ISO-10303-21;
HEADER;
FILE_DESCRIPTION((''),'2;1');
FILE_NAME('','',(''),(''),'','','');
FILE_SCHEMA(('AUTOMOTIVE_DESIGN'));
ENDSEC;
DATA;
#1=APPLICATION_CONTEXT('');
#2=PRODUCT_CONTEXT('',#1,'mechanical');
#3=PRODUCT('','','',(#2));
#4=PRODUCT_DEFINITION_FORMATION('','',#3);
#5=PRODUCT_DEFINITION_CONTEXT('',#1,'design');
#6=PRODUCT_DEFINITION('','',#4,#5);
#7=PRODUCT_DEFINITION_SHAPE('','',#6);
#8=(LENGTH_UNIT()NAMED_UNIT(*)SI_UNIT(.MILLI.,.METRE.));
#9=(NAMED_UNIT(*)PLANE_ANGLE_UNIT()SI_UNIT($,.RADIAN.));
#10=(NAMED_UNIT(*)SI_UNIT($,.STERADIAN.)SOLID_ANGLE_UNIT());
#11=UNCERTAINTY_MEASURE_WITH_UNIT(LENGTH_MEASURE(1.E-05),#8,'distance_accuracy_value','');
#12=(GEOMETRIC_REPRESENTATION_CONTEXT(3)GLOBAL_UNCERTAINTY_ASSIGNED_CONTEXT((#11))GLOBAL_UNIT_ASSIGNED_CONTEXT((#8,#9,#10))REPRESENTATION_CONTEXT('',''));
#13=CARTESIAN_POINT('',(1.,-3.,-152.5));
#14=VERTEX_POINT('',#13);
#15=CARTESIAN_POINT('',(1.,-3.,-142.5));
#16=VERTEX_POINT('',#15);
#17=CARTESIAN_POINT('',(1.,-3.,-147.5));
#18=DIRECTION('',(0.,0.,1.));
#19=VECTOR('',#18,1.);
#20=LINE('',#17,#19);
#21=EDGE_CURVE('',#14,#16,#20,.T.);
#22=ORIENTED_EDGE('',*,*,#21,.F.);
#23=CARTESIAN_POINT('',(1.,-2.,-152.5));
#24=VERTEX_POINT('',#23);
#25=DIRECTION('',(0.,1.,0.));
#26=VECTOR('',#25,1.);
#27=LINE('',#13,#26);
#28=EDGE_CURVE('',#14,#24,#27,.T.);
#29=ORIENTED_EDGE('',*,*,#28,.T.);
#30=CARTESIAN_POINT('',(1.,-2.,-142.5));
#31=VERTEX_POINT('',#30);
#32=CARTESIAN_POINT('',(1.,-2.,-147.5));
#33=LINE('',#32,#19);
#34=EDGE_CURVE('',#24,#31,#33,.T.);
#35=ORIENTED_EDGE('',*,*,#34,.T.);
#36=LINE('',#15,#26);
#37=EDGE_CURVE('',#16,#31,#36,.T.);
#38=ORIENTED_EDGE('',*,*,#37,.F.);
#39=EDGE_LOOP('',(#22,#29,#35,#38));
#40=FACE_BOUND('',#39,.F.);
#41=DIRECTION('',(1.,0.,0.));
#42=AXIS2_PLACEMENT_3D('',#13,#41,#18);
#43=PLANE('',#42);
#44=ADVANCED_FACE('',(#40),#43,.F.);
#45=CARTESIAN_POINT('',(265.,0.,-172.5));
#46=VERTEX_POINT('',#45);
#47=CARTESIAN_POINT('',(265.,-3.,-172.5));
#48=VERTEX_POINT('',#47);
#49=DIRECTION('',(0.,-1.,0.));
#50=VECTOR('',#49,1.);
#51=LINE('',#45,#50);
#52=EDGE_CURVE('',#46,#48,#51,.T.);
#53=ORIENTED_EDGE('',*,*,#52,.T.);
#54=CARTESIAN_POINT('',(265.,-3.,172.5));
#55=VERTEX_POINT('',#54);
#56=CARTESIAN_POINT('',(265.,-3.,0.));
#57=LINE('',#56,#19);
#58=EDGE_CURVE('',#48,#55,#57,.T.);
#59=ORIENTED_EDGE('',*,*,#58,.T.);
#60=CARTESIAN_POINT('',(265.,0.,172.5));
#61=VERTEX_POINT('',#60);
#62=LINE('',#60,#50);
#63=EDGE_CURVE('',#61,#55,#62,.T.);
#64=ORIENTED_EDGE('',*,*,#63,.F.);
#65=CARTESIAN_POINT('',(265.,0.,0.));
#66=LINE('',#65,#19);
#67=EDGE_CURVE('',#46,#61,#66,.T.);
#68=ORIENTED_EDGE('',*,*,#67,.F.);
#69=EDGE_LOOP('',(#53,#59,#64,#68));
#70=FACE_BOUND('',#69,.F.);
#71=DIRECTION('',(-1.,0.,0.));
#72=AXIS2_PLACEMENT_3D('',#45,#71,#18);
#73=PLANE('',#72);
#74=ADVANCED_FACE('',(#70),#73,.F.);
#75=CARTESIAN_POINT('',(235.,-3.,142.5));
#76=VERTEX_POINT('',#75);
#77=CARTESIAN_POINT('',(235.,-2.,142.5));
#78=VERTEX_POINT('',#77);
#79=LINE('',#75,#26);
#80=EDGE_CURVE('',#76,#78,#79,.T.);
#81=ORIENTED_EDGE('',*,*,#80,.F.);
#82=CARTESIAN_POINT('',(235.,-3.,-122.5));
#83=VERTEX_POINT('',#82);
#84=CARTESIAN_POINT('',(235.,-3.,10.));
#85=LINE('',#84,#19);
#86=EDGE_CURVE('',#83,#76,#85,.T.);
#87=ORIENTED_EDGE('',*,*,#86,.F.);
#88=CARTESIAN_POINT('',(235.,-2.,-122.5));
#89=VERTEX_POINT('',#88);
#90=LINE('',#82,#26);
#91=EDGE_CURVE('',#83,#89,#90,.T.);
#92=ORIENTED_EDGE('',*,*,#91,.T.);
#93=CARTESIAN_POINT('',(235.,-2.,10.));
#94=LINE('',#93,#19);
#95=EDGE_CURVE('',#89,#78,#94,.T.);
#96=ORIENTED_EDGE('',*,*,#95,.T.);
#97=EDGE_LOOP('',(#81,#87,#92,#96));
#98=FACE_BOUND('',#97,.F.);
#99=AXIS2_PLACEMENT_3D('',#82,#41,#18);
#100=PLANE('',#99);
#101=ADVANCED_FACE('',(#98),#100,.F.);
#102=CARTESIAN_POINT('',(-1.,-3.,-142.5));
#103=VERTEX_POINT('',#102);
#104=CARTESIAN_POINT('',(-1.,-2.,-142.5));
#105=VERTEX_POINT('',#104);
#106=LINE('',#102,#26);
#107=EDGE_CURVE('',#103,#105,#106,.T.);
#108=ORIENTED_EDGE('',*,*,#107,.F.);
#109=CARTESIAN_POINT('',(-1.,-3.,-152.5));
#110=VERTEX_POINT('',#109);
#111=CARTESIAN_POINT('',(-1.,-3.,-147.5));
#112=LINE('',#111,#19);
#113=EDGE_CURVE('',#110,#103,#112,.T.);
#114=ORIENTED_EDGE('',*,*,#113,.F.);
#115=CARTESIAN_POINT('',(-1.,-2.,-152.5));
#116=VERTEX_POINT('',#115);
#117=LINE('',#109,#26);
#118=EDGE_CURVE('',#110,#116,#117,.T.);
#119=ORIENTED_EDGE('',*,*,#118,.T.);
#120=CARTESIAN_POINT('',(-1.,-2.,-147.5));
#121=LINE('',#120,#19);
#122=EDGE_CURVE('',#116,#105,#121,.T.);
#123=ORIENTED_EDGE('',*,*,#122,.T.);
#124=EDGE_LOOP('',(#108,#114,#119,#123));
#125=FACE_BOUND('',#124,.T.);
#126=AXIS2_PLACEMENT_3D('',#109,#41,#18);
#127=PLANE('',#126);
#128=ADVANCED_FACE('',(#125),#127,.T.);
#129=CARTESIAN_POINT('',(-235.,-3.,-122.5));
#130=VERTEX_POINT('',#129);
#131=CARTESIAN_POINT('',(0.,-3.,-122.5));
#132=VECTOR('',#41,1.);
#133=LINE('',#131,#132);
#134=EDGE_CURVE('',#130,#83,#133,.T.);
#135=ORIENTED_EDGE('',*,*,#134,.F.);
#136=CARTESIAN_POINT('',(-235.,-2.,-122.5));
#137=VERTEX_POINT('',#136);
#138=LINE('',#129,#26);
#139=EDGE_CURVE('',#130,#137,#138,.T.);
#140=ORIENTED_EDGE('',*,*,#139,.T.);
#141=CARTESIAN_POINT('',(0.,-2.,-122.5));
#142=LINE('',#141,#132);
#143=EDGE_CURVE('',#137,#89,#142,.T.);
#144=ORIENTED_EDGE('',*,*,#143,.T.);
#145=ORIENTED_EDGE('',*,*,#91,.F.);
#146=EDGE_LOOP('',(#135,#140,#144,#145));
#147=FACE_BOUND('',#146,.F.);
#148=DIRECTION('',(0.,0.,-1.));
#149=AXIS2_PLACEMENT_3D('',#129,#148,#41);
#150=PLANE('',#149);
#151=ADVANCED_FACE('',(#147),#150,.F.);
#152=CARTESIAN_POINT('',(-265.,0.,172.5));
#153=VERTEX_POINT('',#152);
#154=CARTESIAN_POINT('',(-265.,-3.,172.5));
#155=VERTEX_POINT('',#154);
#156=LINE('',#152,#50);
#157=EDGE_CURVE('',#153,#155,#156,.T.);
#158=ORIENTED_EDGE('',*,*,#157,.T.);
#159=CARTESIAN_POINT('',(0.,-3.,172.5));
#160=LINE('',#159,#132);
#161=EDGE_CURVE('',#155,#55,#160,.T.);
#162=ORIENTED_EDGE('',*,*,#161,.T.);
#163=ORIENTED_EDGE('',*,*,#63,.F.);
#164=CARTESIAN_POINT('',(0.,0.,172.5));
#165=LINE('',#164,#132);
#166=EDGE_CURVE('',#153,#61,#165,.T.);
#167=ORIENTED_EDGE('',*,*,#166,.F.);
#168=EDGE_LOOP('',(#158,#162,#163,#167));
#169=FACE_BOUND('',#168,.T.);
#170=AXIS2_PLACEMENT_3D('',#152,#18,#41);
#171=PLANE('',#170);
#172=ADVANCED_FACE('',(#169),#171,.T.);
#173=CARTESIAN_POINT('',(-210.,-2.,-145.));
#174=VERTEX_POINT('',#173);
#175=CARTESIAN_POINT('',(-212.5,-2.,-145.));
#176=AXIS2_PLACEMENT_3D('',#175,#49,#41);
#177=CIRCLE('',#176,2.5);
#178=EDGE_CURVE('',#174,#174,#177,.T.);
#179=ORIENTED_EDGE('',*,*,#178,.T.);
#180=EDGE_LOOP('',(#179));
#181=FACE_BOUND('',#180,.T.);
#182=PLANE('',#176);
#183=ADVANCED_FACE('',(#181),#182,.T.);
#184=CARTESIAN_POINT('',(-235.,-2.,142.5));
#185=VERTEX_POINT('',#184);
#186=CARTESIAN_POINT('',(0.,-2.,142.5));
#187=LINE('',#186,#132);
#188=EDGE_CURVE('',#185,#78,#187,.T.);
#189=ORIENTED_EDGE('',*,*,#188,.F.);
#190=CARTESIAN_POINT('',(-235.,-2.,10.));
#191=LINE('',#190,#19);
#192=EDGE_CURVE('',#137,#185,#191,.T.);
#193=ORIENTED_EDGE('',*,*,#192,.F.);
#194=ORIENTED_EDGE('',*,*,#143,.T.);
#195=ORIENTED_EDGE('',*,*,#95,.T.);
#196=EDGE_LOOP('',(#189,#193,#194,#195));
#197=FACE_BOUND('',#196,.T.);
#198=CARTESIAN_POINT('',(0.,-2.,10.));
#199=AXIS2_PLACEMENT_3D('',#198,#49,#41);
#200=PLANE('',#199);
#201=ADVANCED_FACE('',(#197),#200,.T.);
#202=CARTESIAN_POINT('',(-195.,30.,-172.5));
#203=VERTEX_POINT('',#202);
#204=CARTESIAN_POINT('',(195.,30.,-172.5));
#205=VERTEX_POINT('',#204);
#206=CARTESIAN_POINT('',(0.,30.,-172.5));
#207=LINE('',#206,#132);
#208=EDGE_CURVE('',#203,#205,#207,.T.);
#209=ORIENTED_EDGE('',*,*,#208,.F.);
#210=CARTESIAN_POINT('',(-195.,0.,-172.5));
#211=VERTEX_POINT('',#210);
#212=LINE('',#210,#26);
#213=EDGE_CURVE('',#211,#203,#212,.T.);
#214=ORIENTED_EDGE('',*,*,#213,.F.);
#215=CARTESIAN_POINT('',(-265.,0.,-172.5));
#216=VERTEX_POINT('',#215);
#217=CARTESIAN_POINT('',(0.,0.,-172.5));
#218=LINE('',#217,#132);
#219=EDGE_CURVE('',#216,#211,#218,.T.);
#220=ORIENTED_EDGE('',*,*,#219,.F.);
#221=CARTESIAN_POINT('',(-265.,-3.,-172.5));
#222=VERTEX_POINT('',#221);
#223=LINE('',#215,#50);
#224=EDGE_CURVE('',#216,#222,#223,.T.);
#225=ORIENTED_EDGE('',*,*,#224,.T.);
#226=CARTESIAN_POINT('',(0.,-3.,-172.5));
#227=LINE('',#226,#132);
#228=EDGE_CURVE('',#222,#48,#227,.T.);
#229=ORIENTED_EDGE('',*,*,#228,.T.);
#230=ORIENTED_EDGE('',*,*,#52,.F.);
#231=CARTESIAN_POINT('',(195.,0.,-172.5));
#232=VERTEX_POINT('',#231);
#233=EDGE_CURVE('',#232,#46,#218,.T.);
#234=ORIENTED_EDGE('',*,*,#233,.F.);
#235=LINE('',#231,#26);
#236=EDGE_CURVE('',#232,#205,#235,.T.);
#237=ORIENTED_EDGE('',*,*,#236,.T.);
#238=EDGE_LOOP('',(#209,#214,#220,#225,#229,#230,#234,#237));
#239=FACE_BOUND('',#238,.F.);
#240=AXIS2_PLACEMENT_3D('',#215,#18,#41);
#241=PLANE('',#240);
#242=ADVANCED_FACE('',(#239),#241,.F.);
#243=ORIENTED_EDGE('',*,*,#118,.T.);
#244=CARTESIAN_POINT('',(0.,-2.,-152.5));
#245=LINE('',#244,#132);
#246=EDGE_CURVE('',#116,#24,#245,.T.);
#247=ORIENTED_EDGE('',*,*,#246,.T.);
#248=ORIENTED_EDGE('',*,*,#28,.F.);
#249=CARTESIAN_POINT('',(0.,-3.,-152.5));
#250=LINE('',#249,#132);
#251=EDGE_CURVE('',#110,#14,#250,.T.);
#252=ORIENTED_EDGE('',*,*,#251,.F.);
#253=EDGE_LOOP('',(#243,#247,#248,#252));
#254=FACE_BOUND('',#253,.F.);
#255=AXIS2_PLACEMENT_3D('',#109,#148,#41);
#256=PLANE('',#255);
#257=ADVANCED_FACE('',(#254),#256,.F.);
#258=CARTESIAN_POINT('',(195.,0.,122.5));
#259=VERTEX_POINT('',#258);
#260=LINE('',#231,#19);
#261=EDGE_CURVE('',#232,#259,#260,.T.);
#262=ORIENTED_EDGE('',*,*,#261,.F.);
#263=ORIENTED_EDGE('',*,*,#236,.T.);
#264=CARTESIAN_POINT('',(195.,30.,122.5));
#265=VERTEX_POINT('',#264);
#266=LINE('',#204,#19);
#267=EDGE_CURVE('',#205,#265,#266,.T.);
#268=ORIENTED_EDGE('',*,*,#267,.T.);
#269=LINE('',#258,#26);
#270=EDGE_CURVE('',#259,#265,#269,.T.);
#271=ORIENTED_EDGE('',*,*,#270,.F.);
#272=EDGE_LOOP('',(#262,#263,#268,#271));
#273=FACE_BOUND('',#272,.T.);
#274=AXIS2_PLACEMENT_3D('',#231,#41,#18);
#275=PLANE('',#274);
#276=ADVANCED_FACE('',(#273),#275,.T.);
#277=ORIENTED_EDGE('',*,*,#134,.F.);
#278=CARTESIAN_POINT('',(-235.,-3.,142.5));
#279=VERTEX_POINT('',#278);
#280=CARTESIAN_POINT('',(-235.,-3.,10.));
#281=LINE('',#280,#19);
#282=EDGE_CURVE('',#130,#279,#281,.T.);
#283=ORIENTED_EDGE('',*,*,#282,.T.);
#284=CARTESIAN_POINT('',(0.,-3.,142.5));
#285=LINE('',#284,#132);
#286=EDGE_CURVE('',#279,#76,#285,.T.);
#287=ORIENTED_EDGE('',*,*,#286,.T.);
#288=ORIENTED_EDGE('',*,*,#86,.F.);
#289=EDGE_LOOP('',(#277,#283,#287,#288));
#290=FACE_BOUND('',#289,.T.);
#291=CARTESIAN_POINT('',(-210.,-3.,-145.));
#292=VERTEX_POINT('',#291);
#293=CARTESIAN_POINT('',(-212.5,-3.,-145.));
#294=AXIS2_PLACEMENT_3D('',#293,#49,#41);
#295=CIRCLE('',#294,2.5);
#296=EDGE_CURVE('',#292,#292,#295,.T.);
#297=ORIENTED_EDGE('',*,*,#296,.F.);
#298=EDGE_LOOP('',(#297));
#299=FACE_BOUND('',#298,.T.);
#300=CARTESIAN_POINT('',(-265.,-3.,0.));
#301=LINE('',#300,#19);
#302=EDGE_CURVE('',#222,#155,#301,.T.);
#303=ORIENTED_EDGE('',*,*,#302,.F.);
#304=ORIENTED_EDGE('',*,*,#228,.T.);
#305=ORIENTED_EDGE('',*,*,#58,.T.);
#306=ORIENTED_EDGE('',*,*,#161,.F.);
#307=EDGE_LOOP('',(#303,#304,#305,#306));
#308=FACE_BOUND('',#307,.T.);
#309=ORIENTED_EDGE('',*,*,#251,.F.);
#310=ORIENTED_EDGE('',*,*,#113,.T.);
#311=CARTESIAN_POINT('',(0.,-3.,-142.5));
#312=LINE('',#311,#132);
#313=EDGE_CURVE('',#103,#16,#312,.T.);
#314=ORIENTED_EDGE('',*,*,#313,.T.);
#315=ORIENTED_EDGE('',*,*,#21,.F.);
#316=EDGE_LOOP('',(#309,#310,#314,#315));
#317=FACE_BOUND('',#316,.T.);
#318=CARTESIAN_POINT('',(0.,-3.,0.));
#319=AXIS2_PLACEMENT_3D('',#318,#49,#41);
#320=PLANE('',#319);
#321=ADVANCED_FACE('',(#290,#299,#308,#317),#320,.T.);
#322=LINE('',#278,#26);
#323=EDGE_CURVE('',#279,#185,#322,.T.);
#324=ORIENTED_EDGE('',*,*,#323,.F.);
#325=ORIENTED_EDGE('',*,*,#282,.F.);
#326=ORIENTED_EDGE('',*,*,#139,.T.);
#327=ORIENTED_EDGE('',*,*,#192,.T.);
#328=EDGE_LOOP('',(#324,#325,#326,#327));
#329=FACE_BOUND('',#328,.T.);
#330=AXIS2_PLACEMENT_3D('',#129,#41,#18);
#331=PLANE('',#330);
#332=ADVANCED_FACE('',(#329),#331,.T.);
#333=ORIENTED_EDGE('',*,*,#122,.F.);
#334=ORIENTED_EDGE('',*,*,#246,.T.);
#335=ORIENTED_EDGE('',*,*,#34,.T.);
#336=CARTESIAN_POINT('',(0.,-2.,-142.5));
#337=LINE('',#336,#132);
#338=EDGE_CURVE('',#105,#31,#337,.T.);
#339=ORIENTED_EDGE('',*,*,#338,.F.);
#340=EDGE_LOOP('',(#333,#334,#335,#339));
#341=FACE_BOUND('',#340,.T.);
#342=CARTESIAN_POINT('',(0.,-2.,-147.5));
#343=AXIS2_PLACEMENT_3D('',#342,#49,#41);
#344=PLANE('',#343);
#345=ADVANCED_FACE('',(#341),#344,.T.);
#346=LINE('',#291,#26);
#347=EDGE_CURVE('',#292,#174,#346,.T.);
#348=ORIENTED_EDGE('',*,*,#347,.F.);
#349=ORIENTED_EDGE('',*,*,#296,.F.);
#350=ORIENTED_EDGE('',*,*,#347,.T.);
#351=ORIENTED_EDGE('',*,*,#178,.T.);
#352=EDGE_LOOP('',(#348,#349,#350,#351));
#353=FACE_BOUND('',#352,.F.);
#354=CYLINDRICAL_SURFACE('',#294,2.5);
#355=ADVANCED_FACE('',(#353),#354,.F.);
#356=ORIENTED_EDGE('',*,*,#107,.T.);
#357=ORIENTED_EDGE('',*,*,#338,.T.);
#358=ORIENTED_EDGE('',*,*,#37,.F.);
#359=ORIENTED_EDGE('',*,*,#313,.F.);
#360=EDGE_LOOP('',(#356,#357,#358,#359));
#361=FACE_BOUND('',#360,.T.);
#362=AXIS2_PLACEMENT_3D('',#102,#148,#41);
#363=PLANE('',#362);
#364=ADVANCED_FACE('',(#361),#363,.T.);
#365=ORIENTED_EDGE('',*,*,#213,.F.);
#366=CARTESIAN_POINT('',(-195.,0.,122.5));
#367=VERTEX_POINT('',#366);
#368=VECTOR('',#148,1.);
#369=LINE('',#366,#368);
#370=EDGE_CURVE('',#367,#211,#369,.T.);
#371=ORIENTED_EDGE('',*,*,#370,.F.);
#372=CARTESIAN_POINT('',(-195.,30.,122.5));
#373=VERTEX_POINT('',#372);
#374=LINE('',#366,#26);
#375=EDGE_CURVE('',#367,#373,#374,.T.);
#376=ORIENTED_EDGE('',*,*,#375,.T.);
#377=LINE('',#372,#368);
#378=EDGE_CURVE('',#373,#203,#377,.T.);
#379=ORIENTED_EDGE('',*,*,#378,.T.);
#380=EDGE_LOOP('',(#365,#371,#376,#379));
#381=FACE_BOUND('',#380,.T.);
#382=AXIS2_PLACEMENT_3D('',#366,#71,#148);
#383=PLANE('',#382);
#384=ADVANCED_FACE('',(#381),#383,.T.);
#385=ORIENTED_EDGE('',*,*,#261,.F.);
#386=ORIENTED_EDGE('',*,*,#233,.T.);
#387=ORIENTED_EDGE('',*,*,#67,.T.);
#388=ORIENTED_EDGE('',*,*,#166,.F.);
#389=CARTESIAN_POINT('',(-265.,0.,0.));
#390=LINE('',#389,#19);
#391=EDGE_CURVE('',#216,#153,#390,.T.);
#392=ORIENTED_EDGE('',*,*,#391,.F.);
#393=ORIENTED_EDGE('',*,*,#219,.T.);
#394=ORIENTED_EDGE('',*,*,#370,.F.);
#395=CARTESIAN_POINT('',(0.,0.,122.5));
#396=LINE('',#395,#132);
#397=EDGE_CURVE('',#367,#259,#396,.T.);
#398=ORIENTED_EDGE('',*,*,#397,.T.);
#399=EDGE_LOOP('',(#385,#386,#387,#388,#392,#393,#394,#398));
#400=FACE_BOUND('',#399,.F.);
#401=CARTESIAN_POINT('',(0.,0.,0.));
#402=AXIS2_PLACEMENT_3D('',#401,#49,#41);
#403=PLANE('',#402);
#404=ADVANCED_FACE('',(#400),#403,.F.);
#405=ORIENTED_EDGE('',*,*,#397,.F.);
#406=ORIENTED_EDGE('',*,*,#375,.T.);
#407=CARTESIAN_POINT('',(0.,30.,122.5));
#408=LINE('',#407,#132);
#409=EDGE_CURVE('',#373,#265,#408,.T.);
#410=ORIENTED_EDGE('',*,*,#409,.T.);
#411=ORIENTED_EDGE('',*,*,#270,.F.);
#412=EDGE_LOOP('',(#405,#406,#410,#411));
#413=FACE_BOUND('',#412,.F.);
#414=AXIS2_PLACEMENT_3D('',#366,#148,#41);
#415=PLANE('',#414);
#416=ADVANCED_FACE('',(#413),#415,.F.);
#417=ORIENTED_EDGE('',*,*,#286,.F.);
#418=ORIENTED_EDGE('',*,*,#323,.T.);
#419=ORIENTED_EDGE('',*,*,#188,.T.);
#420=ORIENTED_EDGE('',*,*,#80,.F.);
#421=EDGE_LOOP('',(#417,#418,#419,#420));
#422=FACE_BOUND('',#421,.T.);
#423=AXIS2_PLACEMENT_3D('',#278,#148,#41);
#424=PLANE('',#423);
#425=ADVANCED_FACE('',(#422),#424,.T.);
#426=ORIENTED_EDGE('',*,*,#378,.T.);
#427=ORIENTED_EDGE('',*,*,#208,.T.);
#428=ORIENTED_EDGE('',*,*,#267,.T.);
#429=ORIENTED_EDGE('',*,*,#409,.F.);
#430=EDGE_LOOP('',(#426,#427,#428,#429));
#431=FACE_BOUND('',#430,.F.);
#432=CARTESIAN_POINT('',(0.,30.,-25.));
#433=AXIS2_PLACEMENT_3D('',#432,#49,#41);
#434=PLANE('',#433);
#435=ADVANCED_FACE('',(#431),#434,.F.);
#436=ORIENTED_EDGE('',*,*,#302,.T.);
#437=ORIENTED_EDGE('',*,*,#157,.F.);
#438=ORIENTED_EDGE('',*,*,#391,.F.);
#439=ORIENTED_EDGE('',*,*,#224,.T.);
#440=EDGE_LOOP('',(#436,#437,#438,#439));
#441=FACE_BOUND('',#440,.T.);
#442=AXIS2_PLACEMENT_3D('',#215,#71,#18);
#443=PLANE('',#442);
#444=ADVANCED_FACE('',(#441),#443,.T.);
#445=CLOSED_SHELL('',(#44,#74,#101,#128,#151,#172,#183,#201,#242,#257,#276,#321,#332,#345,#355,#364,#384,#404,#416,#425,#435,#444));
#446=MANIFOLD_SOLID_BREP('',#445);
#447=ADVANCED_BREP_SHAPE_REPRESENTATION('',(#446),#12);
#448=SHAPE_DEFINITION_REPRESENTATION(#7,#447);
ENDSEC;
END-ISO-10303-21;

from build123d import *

# Parameters (mm, degrees)
F0_W     = 530
F0_H     = 345
F0_R     = 2.5
F0_W_2   = 2
F0_H_2   = 10
F0_W_3   = 470
F0_H_3   = 265
F1_DEPTH = 3
F2_W     = 470
F2_H     = 265
F2_R     = 2.5
F2_W_2   = 2
F2_H_2   = 10
F3_DEPTH = 1
F4_W     = 390
F4_H     = 295
F4_H_2   = 245
F5_DEPTH = 30


with BuildPart() as f1:
    # F0 (on Front) → F1 (new body)
    with BuildSketch(Plane.XZ):
        Rectangle(F0_W, F0_H)
        with Locations((-212.5, -145)):
            Circle(F0_R, mode=Mode.SUBTRACT)
        with Locations((0, -147.5)):
            Rectangle(F0_W_2, F0_H_2, mode=Mode.SUBTRACT)
        with Locations((0, 10)):
            Rectangle(F0_W_3, F0_H_3, mode=Mode.SUBTRACT)
        with Locations((0, 10)):
            Rectangle(F0_W_3, F0_H_3)
        with Locations((0, -147.5)):
            Rectangle(F0_W_2, F0_H_2)
        with Locations((-212.5, -145)):
            Circle(F0_R)
    extrude(amount=F1_DEPTH)

    # F2 (on face) → F3 (cut)
    with BuildSketch(Plane.XZ.offset(3)):
        with Locations((0, 10)):
            Rectangle(F2_W, F2_H)
        with Locations((-212.5, -145)):
            Circle(F2_R)
        with Locations((0, -147.5)):
            Rectangle(F2_W_2, F2_H_2)
    extrude(amount=-F3_DEPTH, mode=Mode.SUBTRACT)

    # F4 (on face) → F5 (join)
    with BuildSketch(Plane.XZ):
        with Locations((0, -25)):
            Rectangle(F4_W, F4_H)
        Rectangle(F4_W, F4_H_2)
    extrude(amount=-F5_DEPTH)


solid = f1.part
